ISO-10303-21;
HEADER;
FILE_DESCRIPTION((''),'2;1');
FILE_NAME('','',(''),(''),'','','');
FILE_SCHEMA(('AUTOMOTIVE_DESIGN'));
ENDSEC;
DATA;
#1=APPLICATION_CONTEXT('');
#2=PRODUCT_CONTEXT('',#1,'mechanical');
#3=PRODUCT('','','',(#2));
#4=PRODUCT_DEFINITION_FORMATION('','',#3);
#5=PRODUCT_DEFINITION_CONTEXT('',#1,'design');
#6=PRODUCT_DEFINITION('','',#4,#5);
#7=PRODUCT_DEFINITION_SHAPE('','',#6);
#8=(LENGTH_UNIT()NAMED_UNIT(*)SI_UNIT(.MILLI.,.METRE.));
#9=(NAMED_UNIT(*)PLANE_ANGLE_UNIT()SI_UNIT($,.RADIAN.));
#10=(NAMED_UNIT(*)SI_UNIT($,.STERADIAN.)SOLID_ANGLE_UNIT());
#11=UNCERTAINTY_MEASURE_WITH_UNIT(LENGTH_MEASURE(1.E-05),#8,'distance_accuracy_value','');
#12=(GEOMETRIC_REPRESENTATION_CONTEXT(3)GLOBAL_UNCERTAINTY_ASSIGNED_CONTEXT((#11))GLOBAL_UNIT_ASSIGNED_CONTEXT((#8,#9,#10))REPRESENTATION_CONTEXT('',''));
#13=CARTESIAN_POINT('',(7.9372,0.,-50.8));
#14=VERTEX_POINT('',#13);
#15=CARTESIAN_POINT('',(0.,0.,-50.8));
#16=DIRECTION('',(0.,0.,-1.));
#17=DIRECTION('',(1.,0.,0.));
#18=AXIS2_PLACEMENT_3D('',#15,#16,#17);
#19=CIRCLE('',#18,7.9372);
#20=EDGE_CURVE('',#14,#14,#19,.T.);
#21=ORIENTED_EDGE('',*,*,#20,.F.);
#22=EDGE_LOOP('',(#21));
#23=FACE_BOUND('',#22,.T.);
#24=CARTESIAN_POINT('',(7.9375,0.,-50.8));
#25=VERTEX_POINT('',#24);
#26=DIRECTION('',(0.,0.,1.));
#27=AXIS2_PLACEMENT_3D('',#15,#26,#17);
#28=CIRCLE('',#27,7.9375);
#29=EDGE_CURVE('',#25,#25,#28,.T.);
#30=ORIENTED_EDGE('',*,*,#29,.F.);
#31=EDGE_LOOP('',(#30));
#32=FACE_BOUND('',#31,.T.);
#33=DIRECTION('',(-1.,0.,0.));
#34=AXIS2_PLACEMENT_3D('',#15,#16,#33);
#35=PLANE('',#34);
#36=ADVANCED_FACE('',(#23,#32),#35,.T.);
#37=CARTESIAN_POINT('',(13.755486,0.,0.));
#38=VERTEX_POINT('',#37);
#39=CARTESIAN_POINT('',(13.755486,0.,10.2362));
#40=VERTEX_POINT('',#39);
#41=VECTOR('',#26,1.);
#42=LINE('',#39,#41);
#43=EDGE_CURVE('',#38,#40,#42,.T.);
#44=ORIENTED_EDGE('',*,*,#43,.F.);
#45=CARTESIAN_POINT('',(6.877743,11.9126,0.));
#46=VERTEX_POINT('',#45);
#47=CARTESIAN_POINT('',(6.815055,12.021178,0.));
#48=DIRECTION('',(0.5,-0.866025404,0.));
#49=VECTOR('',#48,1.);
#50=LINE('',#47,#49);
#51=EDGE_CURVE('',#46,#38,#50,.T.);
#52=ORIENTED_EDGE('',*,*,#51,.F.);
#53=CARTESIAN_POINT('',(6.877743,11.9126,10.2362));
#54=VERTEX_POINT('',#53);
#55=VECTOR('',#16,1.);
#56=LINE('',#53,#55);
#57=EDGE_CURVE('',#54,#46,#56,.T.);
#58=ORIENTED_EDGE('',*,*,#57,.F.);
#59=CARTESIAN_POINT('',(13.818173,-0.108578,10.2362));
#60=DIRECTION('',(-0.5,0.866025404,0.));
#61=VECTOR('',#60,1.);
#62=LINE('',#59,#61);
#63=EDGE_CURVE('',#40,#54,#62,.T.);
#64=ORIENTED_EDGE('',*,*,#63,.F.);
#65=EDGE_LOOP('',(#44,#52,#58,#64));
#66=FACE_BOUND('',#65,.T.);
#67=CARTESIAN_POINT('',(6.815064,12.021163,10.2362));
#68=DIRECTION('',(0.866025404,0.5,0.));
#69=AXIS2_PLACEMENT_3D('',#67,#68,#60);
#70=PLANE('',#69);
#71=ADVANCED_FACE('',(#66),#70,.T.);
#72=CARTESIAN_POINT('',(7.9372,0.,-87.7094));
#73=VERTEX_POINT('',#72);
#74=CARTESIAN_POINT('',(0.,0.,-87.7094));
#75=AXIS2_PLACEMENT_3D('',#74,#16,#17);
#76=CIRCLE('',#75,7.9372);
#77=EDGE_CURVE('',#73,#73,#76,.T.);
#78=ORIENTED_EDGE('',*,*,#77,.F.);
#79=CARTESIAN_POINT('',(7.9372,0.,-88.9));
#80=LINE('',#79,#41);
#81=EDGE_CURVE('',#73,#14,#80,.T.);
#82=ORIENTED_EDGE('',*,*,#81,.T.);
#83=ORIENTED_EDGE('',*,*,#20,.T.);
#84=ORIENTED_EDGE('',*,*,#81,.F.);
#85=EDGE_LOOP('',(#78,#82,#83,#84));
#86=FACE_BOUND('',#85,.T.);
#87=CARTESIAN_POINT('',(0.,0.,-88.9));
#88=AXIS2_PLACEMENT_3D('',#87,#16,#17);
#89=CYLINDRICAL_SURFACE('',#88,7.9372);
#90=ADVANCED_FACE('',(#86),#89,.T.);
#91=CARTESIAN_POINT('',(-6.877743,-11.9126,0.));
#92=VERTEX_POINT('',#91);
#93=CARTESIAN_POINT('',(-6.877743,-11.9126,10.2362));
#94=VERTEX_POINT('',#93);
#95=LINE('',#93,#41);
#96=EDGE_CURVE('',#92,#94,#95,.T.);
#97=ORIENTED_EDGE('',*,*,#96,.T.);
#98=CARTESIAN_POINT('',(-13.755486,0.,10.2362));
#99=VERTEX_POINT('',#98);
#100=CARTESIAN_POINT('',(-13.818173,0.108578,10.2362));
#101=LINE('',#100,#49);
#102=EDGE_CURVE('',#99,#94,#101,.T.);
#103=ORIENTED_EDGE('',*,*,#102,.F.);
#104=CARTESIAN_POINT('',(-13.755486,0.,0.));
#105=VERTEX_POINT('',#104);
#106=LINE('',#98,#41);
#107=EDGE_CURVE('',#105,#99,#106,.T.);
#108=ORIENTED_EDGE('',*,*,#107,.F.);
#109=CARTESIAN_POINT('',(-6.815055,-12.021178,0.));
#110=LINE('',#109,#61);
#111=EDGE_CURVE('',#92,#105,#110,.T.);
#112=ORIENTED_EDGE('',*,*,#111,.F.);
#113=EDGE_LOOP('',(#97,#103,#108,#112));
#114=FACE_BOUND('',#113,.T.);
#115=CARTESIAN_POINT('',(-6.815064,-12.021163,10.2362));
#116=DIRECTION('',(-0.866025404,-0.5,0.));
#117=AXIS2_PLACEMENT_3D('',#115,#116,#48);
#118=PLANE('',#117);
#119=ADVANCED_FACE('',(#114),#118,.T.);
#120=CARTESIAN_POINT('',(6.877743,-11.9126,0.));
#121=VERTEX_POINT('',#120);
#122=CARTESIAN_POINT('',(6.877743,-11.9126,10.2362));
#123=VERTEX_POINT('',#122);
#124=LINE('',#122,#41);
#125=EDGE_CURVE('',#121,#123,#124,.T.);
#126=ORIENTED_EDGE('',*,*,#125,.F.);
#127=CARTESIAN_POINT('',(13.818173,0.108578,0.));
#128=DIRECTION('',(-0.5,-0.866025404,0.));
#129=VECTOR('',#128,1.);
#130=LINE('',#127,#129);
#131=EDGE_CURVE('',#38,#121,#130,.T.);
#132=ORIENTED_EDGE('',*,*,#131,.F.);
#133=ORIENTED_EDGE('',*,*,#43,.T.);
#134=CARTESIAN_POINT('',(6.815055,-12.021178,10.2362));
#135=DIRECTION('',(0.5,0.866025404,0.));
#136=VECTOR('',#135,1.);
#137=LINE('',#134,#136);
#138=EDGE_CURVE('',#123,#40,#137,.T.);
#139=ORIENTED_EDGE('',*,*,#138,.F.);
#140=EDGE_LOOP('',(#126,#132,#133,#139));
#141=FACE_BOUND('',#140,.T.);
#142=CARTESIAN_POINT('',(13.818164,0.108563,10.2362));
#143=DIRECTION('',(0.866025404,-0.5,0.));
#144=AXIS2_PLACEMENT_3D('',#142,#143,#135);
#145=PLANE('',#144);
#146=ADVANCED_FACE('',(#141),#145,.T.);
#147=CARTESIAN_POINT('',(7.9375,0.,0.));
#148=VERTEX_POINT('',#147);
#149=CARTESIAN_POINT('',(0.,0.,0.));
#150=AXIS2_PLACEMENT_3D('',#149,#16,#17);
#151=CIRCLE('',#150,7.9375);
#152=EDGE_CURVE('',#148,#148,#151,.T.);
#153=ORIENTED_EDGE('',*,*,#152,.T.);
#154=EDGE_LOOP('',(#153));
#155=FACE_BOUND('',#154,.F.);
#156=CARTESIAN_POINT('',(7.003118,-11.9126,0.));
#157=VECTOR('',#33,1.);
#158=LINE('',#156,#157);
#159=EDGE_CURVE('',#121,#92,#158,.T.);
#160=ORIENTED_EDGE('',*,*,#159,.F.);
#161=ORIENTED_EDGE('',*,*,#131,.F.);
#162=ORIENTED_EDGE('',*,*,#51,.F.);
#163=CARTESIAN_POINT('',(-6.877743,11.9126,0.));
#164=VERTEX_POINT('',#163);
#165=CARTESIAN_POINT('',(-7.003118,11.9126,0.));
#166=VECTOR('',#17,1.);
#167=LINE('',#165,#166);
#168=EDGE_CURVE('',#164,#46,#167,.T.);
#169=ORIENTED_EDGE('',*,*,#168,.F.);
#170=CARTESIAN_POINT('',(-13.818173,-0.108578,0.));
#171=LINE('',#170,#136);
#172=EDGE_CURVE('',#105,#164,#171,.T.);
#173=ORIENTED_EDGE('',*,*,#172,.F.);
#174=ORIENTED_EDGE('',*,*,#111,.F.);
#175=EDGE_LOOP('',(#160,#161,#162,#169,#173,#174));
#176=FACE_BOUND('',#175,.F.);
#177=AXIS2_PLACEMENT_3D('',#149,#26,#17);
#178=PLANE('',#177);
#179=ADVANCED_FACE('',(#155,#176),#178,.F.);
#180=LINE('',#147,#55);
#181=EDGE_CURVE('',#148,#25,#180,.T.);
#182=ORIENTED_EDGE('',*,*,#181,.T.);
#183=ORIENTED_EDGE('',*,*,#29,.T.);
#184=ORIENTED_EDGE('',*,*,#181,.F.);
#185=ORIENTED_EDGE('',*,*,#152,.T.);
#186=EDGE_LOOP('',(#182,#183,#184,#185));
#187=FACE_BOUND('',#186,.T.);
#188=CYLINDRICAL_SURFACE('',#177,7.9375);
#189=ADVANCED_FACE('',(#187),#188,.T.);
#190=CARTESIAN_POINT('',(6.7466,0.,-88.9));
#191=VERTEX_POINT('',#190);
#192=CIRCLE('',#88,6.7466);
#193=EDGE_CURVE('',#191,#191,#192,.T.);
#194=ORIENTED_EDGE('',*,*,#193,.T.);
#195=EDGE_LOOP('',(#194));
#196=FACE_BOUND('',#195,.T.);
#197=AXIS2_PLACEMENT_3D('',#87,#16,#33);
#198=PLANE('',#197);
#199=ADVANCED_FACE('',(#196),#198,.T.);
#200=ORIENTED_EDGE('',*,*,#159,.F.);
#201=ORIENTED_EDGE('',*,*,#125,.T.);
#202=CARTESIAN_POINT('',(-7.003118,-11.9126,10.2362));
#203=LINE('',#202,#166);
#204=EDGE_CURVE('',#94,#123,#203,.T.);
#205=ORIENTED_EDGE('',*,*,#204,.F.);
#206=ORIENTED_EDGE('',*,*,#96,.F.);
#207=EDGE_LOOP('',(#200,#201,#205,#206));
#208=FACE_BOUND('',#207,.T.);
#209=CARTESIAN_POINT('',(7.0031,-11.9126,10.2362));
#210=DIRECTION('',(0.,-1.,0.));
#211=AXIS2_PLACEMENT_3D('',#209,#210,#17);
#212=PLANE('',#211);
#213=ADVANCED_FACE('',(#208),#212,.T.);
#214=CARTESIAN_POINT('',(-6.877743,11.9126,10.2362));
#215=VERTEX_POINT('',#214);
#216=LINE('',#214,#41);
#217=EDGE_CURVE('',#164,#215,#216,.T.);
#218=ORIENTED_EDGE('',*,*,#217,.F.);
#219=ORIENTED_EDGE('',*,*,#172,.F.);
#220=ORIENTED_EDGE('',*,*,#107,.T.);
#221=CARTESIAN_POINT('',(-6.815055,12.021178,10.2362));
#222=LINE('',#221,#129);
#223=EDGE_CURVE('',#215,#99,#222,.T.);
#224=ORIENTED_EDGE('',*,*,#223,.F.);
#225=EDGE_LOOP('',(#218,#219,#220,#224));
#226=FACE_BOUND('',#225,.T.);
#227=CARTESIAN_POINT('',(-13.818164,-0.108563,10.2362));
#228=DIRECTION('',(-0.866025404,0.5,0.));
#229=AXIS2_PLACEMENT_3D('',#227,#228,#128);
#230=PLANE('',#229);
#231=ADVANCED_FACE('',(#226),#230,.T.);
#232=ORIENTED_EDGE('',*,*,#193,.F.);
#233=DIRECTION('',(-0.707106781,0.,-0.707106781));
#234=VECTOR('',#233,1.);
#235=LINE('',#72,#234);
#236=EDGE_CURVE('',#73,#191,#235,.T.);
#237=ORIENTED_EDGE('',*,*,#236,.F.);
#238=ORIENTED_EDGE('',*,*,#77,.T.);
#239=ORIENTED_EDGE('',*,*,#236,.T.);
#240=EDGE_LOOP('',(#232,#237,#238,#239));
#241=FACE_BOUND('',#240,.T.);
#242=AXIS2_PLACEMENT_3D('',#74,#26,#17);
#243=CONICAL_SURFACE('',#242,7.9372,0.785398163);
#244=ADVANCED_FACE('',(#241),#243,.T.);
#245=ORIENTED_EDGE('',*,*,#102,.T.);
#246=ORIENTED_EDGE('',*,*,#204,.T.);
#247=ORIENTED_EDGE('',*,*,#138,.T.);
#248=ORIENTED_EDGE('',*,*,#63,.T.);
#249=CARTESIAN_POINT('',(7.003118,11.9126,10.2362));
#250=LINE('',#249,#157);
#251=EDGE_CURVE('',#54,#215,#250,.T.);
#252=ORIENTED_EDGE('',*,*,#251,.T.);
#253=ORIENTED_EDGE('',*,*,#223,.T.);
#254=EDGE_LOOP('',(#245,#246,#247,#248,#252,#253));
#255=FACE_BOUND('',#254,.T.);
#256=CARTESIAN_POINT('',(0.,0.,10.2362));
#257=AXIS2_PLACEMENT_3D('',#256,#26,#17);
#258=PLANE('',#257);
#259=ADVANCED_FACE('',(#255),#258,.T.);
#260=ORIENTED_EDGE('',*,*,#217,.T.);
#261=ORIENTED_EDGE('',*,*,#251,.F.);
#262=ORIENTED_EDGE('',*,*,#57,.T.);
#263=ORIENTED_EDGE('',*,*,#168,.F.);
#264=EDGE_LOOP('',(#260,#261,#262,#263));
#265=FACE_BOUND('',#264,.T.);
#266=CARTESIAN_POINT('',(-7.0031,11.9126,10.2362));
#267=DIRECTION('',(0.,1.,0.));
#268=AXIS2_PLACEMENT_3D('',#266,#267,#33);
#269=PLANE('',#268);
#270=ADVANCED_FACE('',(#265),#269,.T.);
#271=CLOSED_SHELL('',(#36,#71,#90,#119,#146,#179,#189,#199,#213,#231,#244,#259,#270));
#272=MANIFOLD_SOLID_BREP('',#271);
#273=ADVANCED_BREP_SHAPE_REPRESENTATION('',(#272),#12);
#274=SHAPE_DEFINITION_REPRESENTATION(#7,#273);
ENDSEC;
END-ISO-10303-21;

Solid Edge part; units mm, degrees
sketch "Sketch1" plane through (0, 0, 0) normal (0, 0, 1) x (1, 0, 0)
  circle A0 centre (0, 0) radius 13.8186
  dimension "D1" = 27.6372
extrude "Protrusion1" add sketch "Sketch1" along normal blind 10.2362
sketch "Sketch2" plane through (0, 0, 0) normal (0, 0, -1) x (1, 0, 0)
  circle A0 centre (0, 0) radius 7.9375
extrude "Protrusion2" add sketch "Sketch2" along normal blind 88.9
sketch "Sketch3" plane through (0, 0, -88.9) normal (0, 0, -1) x (1, 0, 0)
  circle A0 centre (0, 0) radius 7.9372
extrude "Cutout1" cut sketch "Sketch3" against normal blind 38.1 flip side to cut
chamfer "Chamfer_1" distance 1.1906 angle 45 1 edges at (-7.9372, 0, -88.9)
sketch "Sketch4" plane through (0, 0, 10.2362) normal (0, 0, 1) x (1, 0, 0)
  line L0 (-7.0031, 11.9126) -> (7.0031, 11.9126)
  dimension "D1" = 23.8252
extrude "Cutout2" cut sketch "Sketch4" against normal up to next material side at (0, 11.9626, 10.2362)
pattern_circular "Pattern1" count 6 over 360 about axis through (0, 0, 10.2362) along (0, 0, 1) of "Cutout2"
properties part number "117592"
